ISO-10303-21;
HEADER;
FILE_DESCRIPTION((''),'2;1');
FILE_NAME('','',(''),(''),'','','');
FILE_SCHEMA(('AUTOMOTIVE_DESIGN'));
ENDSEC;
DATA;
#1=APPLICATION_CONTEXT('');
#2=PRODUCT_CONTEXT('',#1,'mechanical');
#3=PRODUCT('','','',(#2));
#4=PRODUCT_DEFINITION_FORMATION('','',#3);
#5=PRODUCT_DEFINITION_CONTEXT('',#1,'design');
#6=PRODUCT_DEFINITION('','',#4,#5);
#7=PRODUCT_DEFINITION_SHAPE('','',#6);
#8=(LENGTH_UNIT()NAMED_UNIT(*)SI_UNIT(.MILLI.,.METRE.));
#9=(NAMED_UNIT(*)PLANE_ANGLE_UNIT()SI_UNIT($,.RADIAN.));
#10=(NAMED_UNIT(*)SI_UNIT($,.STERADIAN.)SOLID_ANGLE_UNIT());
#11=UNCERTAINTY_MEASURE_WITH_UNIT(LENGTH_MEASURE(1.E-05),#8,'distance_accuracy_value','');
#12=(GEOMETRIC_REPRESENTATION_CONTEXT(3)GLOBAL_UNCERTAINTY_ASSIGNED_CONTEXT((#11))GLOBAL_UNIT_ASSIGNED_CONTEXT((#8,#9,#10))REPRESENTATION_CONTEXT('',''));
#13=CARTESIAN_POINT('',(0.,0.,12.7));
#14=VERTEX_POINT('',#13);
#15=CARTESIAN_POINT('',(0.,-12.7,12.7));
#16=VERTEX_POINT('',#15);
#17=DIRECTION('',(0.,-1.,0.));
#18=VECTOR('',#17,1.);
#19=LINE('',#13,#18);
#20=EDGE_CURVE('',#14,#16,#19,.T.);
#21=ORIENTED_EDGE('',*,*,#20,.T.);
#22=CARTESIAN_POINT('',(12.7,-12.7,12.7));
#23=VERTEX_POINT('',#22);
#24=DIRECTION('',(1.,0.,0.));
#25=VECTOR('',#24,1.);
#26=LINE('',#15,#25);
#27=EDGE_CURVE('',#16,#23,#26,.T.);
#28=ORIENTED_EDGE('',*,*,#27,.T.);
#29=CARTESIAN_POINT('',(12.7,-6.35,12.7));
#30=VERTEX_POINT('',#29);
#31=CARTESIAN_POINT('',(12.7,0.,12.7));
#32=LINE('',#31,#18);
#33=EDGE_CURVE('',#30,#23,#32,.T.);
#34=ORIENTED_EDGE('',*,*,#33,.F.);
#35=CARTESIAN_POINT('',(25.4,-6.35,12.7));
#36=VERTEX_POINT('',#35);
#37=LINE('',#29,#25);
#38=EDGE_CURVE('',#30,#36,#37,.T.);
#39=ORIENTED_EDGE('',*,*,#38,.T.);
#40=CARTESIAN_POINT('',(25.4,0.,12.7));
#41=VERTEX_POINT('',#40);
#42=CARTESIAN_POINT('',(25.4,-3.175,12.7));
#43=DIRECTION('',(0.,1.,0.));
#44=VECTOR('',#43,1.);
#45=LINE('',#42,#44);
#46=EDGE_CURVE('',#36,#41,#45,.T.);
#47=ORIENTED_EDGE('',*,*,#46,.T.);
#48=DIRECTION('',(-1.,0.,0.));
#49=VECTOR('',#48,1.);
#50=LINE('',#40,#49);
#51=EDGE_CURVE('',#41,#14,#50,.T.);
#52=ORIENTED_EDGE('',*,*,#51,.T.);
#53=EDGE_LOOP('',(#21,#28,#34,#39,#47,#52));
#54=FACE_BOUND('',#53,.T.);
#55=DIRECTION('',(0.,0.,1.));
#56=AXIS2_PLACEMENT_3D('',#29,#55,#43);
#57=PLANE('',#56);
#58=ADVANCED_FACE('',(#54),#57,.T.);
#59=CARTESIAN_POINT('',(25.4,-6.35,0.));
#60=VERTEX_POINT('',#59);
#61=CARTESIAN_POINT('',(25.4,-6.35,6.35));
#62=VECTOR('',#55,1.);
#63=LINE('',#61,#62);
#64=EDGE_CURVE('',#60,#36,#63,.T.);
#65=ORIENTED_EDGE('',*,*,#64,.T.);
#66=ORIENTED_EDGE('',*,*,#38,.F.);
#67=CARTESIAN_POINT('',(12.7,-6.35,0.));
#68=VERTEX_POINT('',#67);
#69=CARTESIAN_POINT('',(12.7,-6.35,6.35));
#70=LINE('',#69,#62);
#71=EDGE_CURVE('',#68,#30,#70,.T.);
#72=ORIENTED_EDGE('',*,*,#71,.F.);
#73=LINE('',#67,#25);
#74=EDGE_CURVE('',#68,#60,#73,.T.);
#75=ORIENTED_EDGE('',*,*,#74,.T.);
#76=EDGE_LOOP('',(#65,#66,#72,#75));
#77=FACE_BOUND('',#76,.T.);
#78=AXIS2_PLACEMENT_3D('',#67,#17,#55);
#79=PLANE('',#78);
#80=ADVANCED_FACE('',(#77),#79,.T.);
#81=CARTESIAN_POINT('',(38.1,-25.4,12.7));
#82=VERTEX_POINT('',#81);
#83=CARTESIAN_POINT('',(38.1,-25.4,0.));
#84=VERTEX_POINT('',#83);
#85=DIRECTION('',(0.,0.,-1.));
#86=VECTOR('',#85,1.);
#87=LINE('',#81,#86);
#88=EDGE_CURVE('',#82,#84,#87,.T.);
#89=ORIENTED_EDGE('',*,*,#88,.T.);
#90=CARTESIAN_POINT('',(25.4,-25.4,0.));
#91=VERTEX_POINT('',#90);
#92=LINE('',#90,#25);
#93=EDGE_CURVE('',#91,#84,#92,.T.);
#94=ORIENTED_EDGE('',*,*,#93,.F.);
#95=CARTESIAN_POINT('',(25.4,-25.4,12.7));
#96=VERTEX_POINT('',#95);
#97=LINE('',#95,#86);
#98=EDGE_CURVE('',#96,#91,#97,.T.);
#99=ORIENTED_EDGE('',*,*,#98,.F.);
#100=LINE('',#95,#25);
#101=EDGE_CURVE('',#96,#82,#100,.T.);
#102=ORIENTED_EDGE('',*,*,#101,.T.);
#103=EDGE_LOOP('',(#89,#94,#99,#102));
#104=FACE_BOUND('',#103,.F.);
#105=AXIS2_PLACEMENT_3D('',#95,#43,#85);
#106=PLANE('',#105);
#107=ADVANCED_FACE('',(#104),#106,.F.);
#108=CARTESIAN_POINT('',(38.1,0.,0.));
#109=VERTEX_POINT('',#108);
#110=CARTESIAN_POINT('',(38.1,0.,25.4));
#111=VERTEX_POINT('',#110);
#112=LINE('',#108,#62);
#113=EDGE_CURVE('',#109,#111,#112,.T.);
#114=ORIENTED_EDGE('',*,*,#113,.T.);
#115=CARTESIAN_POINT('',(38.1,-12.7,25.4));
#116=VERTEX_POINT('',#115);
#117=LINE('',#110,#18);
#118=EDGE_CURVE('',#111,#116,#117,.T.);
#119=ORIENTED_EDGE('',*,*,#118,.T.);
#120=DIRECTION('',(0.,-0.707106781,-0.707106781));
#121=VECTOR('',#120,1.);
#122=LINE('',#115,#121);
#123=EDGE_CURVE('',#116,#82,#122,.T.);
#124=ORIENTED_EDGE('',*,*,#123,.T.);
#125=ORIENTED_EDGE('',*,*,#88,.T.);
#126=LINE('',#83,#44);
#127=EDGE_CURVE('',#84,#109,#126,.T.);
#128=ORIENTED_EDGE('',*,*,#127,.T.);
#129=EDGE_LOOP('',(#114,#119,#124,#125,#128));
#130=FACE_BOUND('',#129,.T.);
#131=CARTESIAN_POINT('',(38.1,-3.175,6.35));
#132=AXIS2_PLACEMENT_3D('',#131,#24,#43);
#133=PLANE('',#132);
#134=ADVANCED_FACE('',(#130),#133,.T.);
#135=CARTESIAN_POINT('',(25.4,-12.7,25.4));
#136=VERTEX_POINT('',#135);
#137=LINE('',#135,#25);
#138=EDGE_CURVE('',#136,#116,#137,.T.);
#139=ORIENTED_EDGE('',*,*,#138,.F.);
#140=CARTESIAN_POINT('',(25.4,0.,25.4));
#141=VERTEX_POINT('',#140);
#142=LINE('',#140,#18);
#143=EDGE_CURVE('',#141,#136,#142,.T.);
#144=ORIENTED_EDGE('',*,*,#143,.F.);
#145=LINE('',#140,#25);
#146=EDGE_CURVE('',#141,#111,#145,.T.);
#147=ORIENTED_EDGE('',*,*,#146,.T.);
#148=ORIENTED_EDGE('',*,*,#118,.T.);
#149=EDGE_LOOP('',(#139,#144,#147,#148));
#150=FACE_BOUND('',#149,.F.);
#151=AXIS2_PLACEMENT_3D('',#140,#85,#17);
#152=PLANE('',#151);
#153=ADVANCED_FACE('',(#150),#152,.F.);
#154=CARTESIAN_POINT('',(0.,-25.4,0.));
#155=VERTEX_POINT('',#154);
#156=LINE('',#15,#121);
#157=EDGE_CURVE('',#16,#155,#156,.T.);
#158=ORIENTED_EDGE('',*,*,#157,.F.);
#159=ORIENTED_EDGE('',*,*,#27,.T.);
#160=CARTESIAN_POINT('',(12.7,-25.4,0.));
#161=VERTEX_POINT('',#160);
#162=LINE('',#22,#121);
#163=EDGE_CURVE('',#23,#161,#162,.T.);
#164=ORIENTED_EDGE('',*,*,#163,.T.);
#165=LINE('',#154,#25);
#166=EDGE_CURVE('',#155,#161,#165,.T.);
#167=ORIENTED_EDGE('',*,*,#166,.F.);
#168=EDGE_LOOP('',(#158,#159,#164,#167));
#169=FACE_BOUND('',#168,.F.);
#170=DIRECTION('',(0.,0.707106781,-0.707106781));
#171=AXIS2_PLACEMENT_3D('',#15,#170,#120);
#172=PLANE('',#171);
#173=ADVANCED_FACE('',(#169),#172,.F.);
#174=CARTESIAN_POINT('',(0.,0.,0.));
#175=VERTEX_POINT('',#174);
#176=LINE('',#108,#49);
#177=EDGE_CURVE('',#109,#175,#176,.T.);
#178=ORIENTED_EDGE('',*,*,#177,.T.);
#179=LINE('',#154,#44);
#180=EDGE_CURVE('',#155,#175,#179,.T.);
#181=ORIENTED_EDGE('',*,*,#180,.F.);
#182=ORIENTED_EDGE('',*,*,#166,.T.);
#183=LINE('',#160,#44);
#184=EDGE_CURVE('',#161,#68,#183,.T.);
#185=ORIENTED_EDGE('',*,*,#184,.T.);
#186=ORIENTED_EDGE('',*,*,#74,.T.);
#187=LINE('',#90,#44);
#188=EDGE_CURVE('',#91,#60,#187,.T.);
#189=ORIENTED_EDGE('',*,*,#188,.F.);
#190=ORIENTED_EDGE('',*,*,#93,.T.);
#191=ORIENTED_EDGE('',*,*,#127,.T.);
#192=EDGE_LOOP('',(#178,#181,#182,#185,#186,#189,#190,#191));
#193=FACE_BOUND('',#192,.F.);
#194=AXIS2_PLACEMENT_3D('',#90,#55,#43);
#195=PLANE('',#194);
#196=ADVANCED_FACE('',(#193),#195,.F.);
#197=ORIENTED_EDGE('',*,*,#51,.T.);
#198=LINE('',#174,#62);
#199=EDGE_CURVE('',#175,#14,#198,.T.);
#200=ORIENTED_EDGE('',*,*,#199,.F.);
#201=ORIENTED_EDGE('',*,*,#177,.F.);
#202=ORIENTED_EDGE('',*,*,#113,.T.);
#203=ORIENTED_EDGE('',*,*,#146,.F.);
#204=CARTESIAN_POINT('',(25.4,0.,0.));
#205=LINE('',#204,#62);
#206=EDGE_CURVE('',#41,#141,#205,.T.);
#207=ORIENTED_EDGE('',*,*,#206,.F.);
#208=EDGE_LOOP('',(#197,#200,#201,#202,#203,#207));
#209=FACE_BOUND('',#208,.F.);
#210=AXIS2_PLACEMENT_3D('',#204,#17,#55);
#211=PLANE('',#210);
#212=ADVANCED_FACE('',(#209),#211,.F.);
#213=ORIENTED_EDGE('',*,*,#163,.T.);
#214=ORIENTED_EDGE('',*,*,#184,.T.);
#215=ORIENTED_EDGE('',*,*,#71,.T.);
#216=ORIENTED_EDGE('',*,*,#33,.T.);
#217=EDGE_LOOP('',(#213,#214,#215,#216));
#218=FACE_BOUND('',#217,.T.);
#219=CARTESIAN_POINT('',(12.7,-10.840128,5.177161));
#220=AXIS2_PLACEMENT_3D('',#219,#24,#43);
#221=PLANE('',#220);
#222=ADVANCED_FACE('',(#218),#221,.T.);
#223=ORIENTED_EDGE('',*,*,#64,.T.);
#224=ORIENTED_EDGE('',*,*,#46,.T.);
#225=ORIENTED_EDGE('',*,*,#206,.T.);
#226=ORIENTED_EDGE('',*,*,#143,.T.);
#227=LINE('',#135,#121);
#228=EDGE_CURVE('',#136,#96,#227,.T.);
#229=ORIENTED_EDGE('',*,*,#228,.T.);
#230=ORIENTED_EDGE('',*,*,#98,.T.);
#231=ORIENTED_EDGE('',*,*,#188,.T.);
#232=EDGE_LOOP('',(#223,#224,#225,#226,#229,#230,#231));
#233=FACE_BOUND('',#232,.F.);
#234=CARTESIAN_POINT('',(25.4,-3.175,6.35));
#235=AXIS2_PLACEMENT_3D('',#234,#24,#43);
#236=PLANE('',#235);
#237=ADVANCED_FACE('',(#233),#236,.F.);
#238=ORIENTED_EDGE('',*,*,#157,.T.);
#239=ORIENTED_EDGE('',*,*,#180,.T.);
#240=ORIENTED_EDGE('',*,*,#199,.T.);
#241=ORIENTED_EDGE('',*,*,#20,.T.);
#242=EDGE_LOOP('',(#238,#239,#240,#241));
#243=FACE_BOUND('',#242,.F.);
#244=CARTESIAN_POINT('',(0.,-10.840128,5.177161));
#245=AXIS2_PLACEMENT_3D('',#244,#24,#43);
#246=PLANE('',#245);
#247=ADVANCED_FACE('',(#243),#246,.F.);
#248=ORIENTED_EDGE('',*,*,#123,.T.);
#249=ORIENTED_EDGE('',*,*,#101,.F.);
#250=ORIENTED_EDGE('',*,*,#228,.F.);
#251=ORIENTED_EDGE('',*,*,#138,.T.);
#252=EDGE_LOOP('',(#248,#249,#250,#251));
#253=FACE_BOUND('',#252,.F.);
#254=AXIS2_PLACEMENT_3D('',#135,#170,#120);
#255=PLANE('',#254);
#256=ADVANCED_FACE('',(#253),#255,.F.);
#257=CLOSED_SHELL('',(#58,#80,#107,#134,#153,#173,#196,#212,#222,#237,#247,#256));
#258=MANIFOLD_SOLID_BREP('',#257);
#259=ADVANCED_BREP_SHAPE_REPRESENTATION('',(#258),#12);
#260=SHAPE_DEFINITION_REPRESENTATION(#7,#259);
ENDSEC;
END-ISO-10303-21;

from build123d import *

# Parameters (mm, degrees)
F1_DEPTH = 12.7
F2_W     = 6.35
F2_H     = 12.7
F3_DEPTH = 12.7
F4_W     = 6.35
F4_H     = 12.7
F5_DEPTH = 12.7


with BuildPart() as f1:
    # F0 (on Right) → F1 (new body)
    with BuildSketch(Plane.YZ):
        Polygon((-25.4, 0), (0, 0), (0, 12.7), (-12.7, 12.7), align=None)
    extrude(amount=F1_DEPTH)

    # F2 (on face) → F3 (join)
    with BuildSketch(Plane.YZ.offset(12.7)):
        with Locations((-3.175, 6.35)):
            Rectangle(F2_W, F2_H)
    extrude(amount=F3_DEPTH)

    # F4 (on face) → F5 (join)
    with BuildSketch(Plane.YZ.offset(25.4)):
        with Locations((-3.175, 6.35)):
            Rectangle(F4_W, F4_H)
        Polygon((-6.35, 12.7), (0, 12.7), (0, 25.4), (-12.7, 25.4), (-25.4, 12.7), (-25.4, 0), (-6.35, 0), align=None)
    extrude(amount=F5_DEPTH)


solid = f1.part
